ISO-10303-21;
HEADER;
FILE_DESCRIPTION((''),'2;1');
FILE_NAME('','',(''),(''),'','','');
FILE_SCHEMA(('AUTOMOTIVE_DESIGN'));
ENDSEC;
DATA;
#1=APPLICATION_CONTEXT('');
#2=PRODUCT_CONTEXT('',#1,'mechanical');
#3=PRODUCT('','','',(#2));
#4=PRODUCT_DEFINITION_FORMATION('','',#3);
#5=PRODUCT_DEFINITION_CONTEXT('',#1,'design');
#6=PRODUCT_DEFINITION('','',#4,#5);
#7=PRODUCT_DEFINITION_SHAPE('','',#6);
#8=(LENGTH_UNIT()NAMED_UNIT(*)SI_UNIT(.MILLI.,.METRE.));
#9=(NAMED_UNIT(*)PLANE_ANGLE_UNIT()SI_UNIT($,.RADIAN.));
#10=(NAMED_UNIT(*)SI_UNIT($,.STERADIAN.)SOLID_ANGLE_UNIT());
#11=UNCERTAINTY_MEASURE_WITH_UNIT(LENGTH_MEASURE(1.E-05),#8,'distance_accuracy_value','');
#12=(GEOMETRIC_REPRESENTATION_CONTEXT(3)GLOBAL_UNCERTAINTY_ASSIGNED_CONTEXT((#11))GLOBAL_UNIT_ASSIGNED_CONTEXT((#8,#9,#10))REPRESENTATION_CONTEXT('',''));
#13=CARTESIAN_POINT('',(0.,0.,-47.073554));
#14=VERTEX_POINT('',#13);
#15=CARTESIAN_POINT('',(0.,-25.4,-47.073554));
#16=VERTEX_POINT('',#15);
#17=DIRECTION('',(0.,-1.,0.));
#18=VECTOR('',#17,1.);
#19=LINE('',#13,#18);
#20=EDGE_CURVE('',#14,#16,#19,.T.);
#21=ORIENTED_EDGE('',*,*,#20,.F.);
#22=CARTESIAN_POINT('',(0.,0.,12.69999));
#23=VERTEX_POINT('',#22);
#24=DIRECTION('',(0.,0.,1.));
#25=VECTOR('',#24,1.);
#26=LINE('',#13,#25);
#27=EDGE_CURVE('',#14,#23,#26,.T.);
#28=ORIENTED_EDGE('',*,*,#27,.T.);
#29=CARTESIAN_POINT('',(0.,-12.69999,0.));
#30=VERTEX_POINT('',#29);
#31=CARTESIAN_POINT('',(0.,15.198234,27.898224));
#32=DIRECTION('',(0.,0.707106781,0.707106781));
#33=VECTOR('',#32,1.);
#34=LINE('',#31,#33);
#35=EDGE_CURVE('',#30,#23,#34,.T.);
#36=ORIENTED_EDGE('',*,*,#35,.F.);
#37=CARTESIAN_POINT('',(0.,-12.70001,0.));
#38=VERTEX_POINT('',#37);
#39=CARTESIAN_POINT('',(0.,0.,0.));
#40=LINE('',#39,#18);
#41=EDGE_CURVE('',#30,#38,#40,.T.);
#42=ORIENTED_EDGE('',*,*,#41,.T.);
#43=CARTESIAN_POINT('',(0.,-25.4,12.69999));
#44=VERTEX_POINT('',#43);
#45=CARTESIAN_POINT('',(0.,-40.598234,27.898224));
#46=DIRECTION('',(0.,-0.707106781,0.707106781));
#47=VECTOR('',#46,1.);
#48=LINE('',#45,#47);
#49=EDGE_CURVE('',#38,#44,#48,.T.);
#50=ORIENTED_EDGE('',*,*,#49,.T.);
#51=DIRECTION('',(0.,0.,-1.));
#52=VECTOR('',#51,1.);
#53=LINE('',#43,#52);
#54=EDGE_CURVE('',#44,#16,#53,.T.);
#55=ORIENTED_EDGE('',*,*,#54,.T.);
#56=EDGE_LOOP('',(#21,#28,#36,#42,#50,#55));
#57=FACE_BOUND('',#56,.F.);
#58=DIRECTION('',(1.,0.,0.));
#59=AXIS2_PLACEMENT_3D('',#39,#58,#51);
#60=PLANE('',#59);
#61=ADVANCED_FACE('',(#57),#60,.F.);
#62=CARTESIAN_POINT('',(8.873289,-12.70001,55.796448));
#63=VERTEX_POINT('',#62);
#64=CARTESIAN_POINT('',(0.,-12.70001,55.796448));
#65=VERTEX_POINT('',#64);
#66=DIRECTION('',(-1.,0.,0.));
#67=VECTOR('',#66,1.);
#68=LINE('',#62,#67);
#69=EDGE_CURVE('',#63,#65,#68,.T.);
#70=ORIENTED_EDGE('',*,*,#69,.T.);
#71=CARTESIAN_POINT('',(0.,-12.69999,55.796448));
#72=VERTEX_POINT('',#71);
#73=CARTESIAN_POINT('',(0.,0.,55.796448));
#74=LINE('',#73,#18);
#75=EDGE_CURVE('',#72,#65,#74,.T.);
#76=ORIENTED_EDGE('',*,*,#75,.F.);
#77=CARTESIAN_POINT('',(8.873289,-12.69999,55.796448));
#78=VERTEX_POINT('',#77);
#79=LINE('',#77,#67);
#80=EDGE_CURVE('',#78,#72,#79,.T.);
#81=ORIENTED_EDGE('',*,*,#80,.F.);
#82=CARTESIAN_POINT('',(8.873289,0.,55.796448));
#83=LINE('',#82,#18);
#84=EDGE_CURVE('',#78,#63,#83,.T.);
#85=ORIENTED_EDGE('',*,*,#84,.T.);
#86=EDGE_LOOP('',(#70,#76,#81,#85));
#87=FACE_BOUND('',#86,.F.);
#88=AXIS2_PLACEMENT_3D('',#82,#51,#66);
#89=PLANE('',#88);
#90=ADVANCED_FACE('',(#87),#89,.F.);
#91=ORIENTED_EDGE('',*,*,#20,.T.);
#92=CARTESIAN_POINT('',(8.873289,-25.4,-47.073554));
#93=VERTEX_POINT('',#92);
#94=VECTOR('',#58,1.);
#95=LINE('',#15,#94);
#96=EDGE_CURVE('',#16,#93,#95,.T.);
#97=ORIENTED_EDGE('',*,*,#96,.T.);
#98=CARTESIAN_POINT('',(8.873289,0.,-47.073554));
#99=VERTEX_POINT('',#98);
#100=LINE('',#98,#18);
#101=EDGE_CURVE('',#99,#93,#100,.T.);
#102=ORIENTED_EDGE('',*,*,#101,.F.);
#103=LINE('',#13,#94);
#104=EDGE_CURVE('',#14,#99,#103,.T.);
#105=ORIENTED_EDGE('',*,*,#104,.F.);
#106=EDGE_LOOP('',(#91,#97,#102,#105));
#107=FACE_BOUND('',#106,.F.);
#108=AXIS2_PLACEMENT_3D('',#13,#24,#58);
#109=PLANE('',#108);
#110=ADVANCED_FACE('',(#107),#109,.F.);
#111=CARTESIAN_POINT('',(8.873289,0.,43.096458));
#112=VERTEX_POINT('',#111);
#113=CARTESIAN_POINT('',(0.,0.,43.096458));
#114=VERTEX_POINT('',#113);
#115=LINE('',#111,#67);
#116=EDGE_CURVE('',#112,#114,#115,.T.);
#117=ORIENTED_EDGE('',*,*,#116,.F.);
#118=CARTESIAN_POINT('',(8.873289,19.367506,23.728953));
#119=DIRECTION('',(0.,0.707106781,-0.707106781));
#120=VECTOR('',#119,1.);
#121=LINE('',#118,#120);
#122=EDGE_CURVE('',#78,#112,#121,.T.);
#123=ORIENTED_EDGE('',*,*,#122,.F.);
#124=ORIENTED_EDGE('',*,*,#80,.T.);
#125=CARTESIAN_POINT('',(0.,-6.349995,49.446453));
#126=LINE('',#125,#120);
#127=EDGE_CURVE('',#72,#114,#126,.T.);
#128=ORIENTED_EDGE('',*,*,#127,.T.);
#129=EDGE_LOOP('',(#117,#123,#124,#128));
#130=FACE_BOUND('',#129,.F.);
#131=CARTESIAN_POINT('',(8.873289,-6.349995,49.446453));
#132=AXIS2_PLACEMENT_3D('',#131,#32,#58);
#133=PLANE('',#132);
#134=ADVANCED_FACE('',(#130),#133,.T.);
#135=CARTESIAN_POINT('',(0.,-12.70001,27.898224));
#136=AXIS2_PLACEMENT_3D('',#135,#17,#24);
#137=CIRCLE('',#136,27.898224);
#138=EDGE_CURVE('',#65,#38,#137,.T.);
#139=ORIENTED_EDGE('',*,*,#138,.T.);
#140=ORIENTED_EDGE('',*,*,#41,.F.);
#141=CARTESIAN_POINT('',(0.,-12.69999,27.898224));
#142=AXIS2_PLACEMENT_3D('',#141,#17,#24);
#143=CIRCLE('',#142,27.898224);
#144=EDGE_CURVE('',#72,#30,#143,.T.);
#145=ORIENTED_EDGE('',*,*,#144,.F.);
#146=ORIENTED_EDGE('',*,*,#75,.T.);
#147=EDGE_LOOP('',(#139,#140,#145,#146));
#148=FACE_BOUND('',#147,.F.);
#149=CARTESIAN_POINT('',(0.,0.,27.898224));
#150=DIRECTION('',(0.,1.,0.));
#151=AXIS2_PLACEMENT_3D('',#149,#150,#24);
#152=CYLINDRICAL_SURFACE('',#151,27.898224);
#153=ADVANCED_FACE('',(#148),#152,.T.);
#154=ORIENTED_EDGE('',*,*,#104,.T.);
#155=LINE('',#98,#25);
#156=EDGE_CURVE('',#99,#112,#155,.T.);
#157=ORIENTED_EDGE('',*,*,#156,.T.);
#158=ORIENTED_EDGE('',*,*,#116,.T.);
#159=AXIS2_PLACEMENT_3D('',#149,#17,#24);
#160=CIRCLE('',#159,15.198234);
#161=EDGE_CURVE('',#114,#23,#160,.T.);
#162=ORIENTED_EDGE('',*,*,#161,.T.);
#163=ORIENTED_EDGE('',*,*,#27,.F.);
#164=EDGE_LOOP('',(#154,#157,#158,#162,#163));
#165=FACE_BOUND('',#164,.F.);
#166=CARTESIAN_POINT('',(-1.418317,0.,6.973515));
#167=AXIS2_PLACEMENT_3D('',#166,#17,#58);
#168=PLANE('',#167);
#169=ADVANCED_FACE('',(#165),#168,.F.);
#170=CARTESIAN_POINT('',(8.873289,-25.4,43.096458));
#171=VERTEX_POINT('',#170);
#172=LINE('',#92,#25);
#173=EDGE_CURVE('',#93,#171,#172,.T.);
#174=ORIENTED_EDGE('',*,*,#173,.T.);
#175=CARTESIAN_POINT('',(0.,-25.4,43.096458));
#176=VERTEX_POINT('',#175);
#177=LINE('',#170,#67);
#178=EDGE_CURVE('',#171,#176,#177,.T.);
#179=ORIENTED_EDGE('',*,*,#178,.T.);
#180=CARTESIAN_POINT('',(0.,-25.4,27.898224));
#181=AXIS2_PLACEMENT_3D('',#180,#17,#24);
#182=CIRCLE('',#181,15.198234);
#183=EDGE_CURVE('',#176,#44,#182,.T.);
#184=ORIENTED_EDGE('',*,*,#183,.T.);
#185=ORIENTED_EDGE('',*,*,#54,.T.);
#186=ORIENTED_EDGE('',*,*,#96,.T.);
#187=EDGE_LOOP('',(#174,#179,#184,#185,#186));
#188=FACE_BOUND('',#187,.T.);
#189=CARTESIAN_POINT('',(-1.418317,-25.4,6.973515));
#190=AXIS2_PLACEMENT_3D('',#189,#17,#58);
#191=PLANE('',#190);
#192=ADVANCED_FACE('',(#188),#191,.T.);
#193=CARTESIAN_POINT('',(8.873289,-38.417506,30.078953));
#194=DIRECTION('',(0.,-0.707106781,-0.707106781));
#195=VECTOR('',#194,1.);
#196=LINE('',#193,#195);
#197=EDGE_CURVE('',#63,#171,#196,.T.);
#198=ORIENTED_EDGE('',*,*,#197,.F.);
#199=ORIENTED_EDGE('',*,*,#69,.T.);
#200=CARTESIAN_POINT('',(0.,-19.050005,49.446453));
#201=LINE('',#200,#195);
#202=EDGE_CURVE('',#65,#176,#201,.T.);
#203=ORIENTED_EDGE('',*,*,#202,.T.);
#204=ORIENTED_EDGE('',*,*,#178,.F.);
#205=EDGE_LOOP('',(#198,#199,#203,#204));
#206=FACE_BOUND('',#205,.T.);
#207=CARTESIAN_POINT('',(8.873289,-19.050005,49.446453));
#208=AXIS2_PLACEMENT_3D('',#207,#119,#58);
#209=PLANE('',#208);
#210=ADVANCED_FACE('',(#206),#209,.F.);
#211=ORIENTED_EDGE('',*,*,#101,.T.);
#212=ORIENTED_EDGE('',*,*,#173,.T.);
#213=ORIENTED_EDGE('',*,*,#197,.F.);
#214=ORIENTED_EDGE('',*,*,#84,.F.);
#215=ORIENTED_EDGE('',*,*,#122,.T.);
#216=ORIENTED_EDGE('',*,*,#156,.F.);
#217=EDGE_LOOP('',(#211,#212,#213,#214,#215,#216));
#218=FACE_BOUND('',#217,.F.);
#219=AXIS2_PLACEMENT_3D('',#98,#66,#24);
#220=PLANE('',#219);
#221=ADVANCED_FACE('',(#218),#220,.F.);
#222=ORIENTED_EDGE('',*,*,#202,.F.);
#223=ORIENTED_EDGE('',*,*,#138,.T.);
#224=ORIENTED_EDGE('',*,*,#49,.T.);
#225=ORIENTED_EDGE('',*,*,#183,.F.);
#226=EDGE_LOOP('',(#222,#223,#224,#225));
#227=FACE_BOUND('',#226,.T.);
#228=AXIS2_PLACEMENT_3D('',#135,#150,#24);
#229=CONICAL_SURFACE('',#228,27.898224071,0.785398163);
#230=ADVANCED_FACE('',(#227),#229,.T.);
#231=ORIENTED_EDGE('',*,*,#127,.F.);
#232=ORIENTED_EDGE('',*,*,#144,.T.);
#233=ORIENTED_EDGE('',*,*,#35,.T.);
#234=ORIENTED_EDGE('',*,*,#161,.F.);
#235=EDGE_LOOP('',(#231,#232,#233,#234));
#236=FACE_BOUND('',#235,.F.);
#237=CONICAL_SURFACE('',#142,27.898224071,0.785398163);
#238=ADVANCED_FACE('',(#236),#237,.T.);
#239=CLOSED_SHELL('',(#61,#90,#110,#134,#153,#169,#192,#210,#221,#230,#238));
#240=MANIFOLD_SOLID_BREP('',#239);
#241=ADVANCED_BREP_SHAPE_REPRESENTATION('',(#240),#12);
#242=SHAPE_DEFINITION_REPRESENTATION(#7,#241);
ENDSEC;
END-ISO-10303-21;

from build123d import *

# Parameters (mm, degrees)
F1_DEPTH = 25.4
F2_SIZE  = 12.69999


# Not quite as in the source:
# - a fillet or chamfer is up to 0.001 mm smaller than in the source, because OpenCascade refuses the exact size


with BuildPart() as f1:
    # F0 (on Front) → F1 (new body)
    with BuildSketch(Plane.XZ):
        with BuildLine():
            Line((8.873289451, 55.7964481413), (0, 55.7964481413))
            ThreePointArc((0, 55.7964481413), (-27.8982240707, 27.8982240707), (0, 0))
            Line((0, 0), (0, -47.0735542476))
            Line((0, -47.0735542476), (8.873289451, -47.0735542476))
            Line((8.873289451, -47.0735542476), (8.873289451, 55.7964481413))
        make_face()
    extrude(amount=F1_DEPTH)

    # F2 (size 12.7 in the source; OpenCascade refuses exactly that, so slightly less here)
    f2_edges = [f1.edges().sort_by_distance(p)[0] for p in [
        (-27.898224, -25.4, 27.898224),
        (-27.898224, 0, 27.898224),
    ]]
    chamfer(f2_edges, length=F2_SIZE)


solid = f1.part
